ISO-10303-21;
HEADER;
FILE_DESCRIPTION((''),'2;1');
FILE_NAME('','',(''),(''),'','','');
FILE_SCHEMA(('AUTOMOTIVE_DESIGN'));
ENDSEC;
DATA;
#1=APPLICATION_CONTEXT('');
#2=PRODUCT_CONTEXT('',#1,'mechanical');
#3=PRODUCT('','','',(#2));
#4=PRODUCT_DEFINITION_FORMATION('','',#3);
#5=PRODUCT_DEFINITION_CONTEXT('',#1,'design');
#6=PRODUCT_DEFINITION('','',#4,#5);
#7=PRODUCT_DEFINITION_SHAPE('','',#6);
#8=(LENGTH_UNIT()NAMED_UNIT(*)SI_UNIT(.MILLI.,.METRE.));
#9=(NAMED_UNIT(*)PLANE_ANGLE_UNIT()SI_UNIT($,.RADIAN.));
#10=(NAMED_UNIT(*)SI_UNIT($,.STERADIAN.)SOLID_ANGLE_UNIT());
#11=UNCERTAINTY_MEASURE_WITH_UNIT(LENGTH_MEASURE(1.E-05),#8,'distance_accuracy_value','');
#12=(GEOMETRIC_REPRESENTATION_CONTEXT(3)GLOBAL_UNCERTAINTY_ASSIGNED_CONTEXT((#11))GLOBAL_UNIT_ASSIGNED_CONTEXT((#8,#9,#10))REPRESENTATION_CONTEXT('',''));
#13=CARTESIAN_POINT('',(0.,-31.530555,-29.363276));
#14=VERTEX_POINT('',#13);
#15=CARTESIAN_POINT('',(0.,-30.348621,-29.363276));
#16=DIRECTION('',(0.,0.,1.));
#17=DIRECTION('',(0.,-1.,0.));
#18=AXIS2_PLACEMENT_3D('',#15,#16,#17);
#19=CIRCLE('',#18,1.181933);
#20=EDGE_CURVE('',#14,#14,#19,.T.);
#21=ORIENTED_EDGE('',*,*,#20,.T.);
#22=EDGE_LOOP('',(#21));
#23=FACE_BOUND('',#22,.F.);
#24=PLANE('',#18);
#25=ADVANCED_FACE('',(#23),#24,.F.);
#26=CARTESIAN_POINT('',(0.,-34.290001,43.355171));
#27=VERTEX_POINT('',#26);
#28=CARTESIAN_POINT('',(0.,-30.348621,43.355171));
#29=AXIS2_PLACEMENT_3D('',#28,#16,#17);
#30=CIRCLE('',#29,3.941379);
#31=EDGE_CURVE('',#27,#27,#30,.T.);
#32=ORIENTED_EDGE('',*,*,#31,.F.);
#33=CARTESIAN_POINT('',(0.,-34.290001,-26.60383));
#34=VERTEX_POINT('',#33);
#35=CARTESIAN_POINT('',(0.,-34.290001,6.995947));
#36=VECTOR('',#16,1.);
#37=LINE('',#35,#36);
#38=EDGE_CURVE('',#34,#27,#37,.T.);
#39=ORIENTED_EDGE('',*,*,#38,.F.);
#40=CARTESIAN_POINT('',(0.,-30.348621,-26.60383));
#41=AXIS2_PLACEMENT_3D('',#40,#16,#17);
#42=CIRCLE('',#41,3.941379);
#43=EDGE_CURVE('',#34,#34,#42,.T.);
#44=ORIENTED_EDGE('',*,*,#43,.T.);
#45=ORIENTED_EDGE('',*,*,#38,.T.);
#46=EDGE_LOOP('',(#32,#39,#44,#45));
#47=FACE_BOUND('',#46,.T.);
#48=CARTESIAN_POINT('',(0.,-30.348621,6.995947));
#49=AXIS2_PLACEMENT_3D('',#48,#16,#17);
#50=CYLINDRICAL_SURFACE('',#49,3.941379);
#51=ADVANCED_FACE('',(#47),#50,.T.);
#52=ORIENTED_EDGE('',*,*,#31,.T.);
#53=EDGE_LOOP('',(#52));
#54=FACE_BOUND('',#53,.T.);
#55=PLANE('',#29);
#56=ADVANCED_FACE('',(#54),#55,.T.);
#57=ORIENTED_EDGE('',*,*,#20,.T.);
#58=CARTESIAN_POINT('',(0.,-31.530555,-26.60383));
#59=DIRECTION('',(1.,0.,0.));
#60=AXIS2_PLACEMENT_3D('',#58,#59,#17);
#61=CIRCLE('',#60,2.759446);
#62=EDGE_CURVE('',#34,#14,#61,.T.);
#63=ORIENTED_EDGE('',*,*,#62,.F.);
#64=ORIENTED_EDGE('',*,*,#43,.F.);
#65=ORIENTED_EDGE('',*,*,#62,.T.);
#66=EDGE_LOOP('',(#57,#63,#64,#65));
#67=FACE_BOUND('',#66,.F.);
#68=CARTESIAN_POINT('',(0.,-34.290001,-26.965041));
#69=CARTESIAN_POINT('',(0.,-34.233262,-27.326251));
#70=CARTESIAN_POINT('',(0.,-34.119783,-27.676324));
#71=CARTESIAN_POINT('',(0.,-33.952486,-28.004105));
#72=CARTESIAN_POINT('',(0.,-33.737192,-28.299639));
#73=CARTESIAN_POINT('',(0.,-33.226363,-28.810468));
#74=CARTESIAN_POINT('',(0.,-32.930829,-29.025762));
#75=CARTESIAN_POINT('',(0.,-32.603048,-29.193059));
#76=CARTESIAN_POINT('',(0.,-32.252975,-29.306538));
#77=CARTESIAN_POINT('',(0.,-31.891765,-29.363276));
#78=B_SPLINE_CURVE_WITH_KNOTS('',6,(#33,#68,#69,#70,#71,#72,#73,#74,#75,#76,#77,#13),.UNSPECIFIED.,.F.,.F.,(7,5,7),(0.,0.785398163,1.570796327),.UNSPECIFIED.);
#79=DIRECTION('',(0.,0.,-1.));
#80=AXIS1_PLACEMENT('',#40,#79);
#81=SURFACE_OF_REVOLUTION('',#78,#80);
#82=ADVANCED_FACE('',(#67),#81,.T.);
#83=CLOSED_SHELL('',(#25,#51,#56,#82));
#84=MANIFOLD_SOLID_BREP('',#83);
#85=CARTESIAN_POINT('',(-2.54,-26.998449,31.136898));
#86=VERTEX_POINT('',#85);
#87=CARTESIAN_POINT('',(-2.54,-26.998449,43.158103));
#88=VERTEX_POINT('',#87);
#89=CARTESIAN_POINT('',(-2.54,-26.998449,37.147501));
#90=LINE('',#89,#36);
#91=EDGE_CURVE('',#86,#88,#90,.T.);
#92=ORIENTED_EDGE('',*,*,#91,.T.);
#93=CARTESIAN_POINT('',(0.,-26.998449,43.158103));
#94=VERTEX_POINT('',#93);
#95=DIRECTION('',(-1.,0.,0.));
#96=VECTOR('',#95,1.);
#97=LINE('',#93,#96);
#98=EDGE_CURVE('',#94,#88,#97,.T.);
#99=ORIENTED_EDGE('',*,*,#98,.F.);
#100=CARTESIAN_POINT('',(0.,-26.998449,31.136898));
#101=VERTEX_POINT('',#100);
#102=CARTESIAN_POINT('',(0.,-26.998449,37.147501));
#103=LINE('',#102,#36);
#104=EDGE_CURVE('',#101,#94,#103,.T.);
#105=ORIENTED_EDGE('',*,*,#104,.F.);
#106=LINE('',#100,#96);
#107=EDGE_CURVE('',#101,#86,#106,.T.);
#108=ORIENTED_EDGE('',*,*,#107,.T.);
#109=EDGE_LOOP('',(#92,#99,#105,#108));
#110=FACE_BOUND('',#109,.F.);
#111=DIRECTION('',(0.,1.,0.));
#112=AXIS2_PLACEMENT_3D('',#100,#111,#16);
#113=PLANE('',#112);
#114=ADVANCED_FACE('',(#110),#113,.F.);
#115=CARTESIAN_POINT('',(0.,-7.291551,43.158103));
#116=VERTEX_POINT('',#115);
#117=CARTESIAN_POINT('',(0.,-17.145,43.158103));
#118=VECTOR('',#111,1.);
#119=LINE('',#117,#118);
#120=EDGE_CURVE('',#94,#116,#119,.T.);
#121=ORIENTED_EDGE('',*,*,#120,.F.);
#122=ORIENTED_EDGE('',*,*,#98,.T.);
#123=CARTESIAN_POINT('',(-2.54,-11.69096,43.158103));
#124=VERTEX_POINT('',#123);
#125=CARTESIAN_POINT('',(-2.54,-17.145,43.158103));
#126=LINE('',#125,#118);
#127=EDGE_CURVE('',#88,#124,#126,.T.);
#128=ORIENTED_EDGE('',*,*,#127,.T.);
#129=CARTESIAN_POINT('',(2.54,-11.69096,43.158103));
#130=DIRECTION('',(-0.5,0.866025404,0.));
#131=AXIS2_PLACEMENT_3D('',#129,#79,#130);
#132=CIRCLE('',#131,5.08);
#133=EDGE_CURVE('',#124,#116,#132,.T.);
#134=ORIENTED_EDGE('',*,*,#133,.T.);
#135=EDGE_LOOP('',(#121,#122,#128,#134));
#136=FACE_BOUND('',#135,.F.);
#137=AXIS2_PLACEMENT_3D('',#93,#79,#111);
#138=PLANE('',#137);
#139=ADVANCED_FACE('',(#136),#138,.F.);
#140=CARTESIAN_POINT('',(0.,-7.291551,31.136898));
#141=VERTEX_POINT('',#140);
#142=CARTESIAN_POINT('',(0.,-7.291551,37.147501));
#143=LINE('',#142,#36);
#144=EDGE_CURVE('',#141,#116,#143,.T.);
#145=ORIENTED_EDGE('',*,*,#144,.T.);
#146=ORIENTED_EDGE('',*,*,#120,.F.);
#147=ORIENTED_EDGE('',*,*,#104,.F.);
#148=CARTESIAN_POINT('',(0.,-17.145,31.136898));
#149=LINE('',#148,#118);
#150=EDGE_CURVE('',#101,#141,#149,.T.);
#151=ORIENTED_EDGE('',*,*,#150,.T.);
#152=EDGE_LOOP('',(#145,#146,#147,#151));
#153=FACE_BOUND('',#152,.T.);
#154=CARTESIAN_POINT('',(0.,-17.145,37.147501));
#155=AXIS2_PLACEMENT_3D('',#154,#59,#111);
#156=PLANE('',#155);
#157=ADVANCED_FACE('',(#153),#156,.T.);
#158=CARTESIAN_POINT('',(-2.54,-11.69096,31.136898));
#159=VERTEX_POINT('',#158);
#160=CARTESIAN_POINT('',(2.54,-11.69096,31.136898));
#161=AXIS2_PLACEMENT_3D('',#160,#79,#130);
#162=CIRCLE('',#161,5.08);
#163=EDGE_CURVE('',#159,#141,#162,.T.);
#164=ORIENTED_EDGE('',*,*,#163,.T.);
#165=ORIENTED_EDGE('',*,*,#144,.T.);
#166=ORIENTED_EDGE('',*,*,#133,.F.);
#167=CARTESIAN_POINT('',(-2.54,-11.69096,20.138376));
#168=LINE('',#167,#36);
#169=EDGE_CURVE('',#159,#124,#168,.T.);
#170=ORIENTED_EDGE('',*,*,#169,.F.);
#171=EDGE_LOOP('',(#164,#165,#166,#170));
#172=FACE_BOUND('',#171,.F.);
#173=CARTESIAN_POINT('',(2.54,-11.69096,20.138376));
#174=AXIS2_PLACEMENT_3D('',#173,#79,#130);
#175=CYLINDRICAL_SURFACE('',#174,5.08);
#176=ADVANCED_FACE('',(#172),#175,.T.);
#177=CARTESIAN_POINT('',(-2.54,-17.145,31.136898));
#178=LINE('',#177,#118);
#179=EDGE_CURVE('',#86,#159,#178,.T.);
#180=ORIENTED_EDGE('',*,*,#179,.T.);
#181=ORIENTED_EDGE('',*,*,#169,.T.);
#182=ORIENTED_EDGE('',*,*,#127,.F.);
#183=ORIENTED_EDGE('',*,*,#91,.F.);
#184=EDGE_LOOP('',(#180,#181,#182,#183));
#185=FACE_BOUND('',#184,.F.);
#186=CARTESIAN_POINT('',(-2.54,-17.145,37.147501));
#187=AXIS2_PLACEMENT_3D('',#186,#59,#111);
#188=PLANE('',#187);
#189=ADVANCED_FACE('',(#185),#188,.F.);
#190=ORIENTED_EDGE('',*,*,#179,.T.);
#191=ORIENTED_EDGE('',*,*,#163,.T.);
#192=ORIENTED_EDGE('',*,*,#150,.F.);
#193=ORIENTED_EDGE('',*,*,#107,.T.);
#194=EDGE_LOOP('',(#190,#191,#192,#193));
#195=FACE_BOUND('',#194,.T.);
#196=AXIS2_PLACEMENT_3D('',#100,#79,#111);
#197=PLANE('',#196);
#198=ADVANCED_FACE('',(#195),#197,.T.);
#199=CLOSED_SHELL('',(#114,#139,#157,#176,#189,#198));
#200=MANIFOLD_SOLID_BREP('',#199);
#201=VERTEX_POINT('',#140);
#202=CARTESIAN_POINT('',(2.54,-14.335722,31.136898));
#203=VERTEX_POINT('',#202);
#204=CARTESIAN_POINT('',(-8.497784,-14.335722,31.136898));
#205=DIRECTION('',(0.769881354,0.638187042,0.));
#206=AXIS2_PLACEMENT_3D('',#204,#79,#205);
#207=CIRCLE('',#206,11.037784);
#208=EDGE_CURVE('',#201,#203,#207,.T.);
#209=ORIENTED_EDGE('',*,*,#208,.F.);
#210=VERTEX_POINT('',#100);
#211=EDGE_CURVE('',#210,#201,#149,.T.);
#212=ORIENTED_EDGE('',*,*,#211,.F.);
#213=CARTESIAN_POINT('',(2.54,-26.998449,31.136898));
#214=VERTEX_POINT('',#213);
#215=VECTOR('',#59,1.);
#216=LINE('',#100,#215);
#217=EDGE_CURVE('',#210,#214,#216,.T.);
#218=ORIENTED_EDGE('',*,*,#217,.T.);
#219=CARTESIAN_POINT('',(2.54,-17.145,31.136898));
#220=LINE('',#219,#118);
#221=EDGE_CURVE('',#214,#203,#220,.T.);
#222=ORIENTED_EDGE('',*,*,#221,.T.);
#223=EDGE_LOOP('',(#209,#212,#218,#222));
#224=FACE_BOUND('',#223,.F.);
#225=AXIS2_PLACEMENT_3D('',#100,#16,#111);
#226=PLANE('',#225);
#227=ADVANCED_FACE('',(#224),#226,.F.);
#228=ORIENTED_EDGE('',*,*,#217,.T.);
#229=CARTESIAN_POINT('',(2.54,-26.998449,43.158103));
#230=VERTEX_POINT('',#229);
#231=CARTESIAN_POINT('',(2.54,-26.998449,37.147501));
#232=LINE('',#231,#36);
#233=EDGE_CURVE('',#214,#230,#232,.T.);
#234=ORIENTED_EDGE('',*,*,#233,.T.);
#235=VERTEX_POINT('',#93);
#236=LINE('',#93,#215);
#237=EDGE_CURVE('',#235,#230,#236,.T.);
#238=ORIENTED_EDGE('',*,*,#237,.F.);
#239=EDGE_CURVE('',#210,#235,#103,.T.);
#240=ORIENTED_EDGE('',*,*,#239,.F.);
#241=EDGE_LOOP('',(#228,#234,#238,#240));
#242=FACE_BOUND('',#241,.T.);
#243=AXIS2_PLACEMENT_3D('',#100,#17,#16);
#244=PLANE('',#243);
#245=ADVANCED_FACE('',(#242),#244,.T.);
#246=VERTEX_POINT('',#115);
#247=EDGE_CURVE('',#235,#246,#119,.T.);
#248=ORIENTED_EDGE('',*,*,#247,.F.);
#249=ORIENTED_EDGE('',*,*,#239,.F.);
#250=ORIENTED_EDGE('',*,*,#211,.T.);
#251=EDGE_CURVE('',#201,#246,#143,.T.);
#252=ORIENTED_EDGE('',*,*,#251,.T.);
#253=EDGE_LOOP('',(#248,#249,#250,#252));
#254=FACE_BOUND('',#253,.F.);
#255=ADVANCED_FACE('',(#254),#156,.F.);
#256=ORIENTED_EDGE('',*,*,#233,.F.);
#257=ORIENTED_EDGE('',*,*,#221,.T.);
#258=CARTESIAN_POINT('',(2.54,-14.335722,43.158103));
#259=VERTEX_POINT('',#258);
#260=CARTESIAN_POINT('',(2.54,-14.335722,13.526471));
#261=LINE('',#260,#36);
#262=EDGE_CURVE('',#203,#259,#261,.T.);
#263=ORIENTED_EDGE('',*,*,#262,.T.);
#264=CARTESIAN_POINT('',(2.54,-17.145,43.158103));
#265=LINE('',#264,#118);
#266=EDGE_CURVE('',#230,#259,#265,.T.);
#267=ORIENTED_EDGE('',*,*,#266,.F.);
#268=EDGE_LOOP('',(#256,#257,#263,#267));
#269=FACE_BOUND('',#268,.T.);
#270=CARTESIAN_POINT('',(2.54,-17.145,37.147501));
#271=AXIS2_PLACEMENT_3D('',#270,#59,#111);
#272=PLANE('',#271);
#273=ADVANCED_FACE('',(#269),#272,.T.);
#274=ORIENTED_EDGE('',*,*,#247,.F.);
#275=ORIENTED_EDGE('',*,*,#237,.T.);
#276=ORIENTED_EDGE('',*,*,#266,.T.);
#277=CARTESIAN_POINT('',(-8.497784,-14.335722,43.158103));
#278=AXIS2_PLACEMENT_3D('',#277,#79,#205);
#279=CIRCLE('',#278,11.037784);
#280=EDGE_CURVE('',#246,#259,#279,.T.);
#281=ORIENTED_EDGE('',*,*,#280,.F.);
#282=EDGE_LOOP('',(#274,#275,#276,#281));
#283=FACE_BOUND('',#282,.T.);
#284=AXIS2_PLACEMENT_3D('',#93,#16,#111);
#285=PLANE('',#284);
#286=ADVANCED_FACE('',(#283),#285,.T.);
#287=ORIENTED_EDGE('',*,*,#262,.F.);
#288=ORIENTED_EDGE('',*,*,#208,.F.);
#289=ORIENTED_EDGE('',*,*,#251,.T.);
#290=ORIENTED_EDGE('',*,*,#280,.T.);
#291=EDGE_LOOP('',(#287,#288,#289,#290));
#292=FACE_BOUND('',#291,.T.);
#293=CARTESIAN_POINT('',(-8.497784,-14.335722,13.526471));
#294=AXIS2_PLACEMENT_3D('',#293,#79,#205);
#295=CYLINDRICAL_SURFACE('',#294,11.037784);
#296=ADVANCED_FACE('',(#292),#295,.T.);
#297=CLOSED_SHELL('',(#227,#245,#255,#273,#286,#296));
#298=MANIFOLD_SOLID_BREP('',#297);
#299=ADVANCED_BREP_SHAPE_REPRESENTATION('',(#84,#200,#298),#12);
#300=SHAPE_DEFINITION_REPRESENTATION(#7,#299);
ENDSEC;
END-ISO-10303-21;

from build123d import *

# Parameters (mm, degrees)
F0_W        = 3.9413794875
F0_H        = 72.7184470743
F2_W        = 19.7068979032
F2_H        = 12.0212044567
F3_DEPTH    = 2.54
F4_T1_DEPTH = 47.2420593542
F5_DEPTH    = 2.54
F6_T1_DEPTH = 34.0182497128
F7_R        = 2.7594461018


# Not quite as in the source:
# - a fillet or chamfer that OpenCascade refuses, or shapes differently, is made with other operations: its cross-section is extruded or revolved along the edge and cut away or added


with BuildPart() as f1:
    # F0 (on Right) → F1 (revolve)
    with BuildSketch(Plane.YZ):
        with Locations((-32.3193110526, 6.9959471002)):
            Rectangle(F0_W, F0_H)
    revolve(axis=Axis((0, -30.3486213088, 6.9959471002), (0, 0, 1)))

    # F7
    f7_edges = [f1.edges().sort_by_distance(p)[0] for p in [
        (0, -26.407242, -29.363276),
    ]]
    fillet(f7_edges, radius=F7_R)


with BuildPart() as f3:
    # F2 (on Right) → F3 (new body)
    with BuildSketch(Plane.YZ):
        with Locations((-17.1450001653, 37.1475005522)):
            Rectangle(F2_W, F2_H)
    extrude(amount=F3_DEPTH)

    # F4: fillet of radius 11.0377844072 on 1 edges, made by hand

    # F4_s2 → F4_t1 (cut)
    with BuildSketch(Plane.XY.offset(13.5264708751)):
        with BuildLine():
            ThreePointArc((0, -7.2915512137), (1.8856012845, -10.5916620712), (2.54, -14.3357221932))
            Line((2.54, -14.3357221932), (2.54, -7.2915512137))
            Line((2.54, -7.2915512137), (0, -7.2915512137))
        make_face()
    extrude(amount=F4_T1_DEPTH, mode=Mode.SUBTRACT)


with BuildPart() as f5:
    # F2 (on Right) → F5 (new body)
    with BuildSketch(Plane.YZ):
        with Locations((-17.1450001653, 37.1475005522)):
            Rectangle(F2_W, F2_H)
    extrude(amount=-F5_DEPTH)

    # F6: fillet of radius 5.08 on 1 edges, made by hand

    # F6_s2 → F6_t1 (cut)
    with BuildSketch(Plane.XY.offset(20.1383756958)):
        with BuildLine():
            ThreePointArc((0, -7.2915512137), (-1.8594090512, -9.1509602649), (-2.54, -11.6909602649))
            Line((-2.54, -11.6909602649), (-2.54, -7.2915512137))
            Line((-2.54, -7.2915512137), (0, -7.2915512137))
        make_face()
    extrude(amount=F6_T1_DEPTH, mode=Mode.SUBTRACT)


solid = Compound([f1.part, f3.part, f5.part])
